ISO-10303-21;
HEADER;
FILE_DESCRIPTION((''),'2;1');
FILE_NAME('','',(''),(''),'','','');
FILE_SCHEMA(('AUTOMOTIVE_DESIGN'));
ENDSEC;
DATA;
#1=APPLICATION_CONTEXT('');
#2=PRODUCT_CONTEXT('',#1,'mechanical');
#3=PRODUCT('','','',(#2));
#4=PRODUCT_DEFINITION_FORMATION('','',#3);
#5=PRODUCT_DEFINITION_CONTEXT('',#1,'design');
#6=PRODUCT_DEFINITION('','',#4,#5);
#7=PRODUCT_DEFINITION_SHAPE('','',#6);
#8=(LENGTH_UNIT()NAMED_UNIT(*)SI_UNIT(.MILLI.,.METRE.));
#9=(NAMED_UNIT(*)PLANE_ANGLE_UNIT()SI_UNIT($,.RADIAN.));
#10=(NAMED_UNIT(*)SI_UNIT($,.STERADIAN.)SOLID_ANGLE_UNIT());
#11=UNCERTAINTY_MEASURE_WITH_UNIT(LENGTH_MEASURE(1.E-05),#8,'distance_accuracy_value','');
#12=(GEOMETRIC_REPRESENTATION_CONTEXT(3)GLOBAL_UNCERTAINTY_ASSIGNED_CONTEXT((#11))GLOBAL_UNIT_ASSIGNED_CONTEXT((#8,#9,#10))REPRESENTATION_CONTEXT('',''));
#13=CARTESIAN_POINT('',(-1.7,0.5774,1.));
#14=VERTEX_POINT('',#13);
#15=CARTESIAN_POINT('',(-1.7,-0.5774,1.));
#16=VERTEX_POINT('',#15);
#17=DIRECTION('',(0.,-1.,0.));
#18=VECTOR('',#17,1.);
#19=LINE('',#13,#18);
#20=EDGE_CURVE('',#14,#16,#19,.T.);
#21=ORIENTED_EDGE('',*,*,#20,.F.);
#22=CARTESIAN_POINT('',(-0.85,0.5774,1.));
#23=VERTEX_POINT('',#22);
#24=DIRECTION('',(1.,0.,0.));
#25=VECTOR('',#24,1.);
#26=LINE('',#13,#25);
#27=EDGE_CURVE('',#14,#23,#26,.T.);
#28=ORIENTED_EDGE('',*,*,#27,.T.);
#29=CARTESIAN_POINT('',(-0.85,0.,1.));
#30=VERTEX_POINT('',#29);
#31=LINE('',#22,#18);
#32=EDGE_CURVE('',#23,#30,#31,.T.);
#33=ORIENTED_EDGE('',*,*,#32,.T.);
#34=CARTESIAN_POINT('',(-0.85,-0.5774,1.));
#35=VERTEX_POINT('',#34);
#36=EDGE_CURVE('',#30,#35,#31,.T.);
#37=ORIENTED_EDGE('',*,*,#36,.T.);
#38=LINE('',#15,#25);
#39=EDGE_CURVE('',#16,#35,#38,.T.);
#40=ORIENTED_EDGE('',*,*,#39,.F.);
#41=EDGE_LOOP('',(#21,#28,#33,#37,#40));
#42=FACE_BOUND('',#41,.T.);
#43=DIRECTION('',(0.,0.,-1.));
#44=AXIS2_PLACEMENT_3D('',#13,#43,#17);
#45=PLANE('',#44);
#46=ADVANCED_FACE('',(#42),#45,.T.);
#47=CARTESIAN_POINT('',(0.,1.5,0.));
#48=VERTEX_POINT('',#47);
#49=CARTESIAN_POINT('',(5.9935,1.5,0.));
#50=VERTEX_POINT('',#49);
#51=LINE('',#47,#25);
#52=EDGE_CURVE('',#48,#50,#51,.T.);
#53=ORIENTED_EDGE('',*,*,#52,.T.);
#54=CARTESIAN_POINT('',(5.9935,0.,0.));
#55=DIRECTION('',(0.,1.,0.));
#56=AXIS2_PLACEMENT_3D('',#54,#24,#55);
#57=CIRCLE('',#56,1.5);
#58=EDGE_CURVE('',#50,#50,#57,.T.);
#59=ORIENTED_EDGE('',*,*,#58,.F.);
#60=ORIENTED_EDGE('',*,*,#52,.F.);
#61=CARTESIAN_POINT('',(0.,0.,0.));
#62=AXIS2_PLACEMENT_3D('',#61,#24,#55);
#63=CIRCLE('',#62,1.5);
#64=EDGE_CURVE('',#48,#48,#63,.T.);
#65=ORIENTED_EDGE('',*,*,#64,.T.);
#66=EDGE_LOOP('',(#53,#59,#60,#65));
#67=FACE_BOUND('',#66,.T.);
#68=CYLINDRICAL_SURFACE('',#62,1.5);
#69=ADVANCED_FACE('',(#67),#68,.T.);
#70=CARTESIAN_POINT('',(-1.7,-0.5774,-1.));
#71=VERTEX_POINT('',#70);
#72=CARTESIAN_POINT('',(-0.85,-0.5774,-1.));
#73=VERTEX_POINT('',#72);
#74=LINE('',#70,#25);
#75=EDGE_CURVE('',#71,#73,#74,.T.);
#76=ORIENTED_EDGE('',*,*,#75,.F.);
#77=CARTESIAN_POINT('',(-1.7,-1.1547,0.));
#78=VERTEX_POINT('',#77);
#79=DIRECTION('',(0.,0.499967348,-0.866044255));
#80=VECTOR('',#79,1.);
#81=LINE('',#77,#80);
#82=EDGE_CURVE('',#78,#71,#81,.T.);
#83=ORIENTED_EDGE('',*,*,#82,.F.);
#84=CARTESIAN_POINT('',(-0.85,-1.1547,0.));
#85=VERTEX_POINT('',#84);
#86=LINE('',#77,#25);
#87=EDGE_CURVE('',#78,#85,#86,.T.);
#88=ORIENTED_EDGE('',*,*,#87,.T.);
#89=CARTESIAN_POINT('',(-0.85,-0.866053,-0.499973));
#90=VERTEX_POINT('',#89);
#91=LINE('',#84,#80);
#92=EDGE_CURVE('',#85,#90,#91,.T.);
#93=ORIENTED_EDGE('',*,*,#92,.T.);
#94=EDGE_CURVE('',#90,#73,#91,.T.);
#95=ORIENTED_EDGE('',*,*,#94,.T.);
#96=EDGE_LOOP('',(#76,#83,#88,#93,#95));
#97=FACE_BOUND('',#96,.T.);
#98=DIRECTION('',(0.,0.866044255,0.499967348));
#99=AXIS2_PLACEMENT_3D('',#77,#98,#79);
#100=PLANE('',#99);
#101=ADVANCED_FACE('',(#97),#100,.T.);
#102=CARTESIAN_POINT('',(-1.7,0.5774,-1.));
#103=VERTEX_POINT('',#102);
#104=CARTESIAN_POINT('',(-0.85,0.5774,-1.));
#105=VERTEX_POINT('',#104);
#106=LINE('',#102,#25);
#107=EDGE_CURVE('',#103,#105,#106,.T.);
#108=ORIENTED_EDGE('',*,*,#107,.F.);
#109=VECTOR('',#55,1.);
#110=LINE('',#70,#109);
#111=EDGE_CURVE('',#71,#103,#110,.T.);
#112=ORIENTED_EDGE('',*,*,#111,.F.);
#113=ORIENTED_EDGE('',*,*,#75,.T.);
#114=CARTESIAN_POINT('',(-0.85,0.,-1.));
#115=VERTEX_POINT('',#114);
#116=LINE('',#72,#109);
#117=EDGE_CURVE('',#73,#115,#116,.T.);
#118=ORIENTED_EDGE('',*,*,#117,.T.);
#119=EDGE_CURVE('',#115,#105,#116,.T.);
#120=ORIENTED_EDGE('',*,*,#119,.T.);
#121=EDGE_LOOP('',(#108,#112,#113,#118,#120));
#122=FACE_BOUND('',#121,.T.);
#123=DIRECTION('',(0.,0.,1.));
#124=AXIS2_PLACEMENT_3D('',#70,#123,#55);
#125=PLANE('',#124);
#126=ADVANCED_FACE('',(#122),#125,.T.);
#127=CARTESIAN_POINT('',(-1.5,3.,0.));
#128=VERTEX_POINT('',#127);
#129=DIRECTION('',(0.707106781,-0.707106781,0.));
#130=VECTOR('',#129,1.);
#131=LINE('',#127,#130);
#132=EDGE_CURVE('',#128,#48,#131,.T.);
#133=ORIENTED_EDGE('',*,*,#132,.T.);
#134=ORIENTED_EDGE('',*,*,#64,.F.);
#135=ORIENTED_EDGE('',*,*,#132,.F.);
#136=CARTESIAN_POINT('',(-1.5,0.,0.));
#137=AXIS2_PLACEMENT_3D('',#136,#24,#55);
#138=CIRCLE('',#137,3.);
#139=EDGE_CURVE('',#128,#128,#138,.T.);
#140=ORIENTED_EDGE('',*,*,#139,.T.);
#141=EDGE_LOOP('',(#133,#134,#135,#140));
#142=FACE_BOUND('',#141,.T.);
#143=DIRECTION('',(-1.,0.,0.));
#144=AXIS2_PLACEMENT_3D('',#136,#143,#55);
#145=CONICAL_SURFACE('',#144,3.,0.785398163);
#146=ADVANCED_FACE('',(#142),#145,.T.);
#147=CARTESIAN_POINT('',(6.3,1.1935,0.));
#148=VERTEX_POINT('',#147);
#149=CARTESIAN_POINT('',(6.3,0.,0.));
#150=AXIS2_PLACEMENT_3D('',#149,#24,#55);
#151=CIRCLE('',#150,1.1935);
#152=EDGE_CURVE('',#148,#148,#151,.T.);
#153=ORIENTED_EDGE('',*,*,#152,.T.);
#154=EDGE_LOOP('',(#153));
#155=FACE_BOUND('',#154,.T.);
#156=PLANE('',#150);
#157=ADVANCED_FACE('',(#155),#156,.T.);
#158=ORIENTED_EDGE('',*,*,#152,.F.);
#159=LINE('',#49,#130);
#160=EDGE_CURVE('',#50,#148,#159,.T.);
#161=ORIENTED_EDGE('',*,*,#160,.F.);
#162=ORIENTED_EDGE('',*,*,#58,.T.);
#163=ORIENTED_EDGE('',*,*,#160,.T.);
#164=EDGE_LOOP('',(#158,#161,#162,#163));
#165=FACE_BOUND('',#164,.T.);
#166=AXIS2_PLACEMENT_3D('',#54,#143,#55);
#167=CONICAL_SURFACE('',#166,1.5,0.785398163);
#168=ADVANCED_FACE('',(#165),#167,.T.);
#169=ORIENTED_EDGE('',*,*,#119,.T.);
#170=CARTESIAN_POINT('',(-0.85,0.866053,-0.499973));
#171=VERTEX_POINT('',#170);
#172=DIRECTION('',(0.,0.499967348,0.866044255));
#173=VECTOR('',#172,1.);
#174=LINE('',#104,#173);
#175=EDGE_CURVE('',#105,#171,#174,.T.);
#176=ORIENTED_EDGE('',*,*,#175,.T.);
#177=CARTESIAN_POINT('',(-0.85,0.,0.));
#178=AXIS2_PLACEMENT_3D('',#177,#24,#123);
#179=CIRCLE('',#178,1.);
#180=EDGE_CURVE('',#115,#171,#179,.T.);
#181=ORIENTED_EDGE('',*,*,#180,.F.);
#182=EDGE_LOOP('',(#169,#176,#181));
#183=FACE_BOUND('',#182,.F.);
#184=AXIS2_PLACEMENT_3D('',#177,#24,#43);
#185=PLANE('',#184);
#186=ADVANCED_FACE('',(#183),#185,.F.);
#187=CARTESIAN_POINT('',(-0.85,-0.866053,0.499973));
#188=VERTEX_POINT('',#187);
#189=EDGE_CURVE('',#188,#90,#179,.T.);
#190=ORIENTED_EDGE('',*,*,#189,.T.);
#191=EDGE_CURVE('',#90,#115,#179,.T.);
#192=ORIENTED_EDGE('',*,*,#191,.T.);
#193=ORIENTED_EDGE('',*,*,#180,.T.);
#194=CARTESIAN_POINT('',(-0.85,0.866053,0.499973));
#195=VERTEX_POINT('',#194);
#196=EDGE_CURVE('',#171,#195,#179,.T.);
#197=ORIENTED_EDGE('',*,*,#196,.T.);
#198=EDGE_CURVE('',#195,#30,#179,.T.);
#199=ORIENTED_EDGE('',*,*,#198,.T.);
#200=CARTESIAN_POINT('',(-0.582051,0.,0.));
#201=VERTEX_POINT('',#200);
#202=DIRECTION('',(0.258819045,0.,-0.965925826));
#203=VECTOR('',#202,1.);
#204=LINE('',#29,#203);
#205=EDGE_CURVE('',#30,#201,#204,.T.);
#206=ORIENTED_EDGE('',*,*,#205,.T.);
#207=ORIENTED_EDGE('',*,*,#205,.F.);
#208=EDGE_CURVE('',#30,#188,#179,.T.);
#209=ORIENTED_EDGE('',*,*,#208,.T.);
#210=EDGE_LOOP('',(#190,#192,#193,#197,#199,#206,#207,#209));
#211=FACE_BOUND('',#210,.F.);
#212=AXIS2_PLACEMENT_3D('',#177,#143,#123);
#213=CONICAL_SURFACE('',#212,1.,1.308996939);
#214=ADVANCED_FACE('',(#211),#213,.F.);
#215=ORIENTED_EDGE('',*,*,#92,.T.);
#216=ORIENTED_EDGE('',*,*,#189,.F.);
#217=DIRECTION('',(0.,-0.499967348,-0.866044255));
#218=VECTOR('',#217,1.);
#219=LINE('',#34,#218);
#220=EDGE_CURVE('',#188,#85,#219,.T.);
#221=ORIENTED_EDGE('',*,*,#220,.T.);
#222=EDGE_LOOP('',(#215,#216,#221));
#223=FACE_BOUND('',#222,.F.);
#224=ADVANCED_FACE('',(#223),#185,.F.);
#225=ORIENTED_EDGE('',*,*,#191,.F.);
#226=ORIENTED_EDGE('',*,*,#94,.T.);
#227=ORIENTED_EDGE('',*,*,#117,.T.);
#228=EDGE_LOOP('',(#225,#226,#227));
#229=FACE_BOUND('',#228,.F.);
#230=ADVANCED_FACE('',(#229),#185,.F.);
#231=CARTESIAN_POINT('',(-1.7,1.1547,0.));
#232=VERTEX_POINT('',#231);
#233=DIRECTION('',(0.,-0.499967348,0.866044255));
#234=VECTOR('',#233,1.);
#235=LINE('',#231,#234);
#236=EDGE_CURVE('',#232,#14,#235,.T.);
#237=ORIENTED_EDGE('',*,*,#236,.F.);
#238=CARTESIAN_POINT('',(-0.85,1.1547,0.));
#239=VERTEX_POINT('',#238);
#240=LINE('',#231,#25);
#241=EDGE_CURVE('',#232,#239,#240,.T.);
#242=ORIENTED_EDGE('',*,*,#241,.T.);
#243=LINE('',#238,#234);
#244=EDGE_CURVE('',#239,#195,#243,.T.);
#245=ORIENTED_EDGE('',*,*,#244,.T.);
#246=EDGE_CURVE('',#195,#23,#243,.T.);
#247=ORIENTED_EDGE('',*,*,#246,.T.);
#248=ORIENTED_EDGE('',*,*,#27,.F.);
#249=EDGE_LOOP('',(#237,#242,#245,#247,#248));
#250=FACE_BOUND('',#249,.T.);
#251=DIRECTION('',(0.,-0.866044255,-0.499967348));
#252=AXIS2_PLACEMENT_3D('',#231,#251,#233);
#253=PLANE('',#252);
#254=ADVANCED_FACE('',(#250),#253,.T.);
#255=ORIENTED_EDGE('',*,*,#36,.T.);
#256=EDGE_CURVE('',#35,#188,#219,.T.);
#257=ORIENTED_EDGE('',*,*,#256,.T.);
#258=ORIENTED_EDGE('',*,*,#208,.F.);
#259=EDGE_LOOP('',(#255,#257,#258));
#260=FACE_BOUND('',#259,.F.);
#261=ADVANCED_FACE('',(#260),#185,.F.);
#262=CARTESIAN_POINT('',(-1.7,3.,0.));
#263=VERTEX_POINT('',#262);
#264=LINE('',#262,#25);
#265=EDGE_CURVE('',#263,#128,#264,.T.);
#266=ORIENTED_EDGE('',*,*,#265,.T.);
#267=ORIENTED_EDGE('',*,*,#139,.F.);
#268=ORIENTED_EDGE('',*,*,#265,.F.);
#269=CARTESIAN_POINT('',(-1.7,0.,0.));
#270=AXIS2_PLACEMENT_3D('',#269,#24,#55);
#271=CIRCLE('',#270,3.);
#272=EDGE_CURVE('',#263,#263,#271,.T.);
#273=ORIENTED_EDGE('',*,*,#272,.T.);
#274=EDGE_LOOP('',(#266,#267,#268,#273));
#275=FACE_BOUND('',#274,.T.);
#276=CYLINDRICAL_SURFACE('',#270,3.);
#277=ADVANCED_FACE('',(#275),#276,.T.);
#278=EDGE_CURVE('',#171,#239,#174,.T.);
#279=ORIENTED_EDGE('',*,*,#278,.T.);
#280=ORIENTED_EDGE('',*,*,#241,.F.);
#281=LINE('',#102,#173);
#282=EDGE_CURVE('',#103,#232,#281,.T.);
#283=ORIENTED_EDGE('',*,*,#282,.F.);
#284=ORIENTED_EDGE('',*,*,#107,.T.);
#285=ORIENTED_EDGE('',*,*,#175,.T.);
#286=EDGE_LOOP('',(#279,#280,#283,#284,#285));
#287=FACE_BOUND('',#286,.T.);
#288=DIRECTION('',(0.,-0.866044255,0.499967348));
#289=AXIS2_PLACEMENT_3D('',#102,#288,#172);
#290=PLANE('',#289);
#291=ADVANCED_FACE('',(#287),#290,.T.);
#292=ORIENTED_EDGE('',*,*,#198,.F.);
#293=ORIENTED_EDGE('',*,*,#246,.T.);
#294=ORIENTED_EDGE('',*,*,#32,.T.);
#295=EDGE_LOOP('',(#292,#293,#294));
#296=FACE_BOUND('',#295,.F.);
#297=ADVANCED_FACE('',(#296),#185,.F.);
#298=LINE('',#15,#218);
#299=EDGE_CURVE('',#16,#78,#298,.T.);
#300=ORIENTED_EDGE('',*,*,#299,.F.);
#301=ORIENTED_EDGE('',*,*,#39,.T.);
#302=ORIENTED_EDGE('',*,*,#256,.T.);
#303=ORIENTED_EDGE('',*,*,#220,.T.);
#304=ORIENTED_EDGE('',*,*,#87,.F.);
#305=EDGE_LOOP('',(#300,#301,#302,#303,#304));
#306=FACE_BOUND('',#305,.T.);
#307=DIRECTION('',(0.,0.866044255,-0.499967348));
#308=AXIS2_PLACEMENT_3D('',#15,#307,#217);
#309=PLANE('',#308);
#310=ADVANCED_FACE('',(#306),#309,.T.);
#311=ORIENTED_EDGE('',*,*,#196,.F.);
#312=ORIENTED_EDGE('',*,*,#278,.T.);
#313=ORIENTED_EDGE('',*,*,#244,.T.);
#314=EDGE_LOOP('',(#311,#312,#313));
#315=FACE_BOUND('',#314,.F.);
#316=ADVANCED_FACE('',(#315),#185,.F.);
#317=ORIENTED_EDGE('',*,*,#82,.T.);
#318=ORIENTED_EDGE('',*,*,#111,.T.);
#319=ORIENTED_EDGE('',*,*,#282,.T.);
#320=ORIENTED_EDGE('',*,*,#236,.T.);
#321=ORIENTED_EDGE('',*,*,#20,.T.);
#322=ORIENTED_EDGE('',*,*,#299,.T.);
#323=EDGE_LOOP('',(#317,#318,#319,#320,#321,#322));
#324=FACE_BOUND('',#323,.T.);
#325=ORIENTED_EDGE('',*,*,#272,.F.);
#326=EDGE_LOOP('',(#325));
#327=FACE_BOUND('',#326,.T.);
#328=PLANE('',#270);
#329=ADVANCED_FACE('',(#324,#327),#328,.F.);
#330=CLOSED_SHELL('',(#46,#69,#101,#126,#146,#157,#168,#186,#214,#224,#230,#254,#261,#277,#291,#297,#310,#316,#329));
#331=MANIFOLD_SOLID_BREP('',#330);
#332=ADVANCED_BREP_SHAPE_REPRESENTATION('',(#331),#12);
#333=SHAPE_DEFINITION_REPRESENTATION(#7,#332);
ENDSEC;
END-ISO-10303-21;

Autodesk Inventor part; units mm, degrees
sketch "Sketch_1" plane through (0, 0, 0) normal (0, 0, 1) x (1, 0, 0)
  line L0 (6.3, 0) -> (0, 0)
  line L1 (-1.7, 0) -> (-1.7, 3)
  line L2 (-1.7, 3) -> (-1.5, 3)
  line L3 (-1.5, 3) -> (0, 1.5)
  line L4 (0, 1.5) -> (5.9935, 1.5)
  line L5 (5.9935, 1.5) -> (6.3, 1.1935)
  line L6 (6.3, 1.1935) -> (6.3, 0)
  line L7 (6.3, 0) -> (-1.7, 0)
revolve "Revolution1" add sketch "Sketch_1" angle 360 about axis through (6.3, 0, 0) along (1, 0, 0)
thread "Thread1" size "M3x0.5" class "6g" standard "ISO Metric profile" length 5.4935
sketch "Sketch2" plane through (-1.7, 0, 0) normal (-1, 0, 0) x (0, 0, 1)
  point P0 (0, 0)
hole "Hole1" at (-1.7, 0, 0) direction (1, 0, 0) diameter 2 depth 0.85 tip angle 150
sketch "Sketch_3" plane through (-1.7, 0, 0) normal (1, 0, 0) x (0, 0, -1)
  line L0 (-1, -0.5774) -> (0, -1.1547)
  line L1 (0, -1.1547) -> (1, -0.5774)
  line L2 (1, -0.5774) -> (1, 0.5774)
  line L3 (1, 0.5774) -> (0, 1.1547)
  line L4 (0, 1.1547) -> (-1, 0.5774)
  line L5 (-1, 0.5774) -> (-1, -0.5774)
extrude "Extrusion1" cut sketch "Sketch_3" along normal blind 0.85
ref_plane "bolt_to_nut_XY" through (6.3, 0, 0) normal (1, 0, 0) x (0, 0, -1)
ref_plane "bolt_to_nut_YZ" through (6.3, 0, 0) normal (0, 0, -1) x (0, 1, 0)
ref_plane "bolt_to_nut_ZX" through (6.3, 0, 0) normal (0, 1, 0) x (1, 0, 0)
ref_plane "dummy_to_bolt_XY" through (0, 0, 0) normal (1, 0, 0) x (0, 0, -1)
ref_plane "dummy_to_bolt_YZ" through (0, 0, 0) normal (0, 0, -1) x (0, 1, 0)
ref_plane "dummy_to_bolt_ZX" through (0, 0, 0) normal (0, 1, 0) x (1, 0, 0)
properties part number "HFBCM3-8"
